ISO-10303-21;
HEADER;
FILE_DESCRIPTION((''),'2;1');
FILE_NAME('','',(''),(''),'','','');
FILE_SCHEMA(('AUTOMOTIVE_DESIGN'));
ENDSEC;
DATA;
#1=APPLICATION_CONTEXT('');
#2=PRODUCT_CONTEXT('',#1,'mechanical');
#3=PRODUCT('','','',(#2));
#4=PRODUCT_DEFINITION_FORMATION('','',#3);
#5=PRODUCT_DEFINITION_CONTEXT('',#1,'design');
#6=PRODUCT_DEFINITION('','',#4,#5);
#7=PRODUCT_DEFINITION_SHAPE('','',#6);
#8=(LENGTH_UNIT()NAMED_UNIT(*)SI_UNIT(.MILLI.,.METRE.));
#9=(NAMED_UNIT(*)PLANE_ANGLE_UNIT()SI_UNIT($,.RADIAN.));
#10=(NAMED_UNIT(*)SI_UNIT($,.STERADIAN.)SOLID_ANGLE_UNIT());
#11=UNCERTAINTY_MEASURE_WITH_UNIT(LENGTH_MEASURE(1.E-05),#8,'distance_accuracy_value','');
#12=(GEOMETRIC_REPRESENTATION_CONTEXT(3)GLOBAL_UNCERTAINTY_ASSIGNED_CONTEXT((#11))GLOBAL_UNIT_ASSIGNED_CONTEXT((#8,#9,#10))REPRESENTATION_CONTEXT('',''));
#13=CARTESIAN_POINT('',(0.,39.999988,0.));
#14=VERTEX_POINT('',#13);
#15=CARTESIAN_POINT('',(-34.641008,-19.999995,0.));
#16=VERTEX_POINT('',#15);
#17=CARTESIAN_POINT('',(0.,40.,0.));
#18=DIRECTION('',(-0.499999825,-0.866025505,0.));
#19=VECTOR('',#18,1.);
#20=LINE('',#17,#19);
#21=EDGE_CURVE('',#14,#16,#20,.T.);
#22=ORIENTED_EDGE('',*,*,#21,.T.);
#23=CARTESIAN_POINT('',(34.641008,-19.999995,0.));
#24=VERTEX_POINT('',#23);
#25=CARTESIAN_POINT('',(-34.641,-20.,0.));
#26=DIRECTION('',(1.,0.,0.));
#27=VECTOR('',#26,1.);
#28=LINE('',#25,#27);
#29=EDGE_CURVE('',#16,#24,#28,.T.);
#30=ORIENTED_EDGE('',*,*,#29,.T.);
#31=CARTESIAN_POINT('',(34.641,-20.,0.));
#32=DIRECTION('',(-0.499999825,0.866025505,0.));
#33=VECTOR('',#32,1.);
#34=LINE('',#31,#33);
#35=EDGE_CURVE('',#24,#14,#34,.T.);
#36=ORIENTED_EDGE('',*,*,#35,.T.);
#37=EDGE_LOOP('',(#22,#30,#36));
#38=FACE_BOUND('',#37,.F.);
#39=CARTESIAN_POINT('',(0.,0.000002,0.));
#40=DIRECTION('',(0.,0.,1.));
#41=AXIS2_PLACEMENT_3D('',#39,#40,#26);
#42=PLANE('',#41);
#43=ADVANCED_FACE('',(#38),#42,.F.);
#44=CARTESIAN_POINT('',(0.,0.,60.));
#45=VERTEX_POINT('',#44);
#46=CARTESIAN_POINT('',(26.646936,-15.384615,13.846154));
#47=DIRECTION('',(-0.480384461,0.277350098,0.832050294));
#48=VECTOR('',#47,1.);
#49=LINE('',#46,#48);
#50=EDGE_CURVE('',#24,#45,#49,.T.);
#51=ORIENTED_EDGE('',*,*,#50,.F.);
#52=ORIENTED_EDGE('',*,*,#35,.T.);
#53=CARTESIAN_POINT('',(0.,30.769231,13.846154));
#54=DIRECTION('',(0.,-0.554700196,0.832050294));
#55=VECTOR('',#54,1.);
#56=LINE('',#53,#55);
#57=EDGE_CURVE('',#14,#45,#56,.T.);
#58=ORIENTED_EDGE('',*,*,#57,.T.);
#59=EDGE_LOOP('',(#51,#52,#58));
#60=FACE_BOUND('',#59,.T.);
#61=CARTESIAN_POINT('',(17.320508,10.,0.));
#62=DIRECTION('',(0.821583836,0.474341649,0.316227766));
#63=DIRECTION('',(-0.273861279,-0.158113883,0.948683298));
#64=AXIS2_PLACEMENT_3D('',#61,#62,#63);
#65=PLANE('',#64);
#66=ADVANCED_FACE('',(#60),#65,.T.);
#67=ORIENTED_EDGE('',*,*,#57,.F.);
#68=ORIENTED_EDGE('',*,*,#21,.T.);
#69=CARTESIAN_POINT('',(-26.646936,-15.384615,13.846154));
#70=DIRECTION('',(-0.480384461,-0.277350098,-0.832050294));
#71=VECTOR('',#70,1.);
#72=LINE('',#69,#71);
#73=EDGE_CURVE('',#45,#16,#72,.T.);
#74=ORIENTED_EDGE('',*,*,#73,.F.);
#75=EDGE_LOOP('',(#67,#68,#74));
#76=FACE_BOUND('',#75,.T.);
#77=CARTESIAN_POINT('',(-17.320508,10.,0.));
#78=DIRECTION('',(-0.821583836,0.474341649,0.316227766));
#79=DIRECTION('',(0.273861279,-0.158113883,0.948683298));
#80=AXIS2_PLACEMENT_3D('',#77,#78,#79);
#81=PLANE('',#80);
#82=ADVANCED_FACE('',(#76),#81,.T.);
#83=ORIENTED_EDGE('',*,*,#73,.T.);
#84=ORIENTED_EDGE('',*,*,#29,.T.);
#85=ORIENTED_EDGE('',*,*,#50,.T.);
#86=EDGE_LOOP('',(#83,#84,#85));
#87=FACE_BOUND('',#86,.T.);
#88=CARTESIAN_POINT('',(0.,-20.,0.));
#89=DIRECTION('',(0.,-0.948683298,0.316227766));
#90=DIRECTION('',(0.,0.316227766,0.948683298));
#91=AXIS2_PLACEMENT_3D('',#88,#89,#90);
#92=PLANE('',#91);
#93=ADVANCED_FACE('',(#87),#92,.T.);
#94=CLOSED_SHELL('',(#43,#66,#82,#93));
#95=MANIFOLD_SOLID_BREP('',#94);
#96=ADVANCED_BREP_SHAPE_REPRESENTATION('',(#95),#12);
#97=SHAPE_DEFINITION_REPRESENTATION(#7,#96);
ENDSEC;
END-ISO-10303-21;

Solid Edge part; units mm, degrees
sketch "Sketch1" plane through (0, 0, 0) normal (0, 0, 1) x (1, 0, 0)
  line L0 (-34.641, -20) -> (34.641, -20)
  line L1 (34.641, -20) -> (0, 40)
  line L2 (0, 40) -> (-34.641, -20)
extrude "Protrusion1" add sketch "Sketch1" along normal up to vertex (60 mm away)
sketch "Sketch2" plane through (0, 0, 0) normal (1, 0, 0) x (0, 1, 0)
  line L0 (-20, 60) -> (-20, 0)
  line L1 (-20, 0) -> (0, 60)
  line L2 (0, 60) -> (-20, 60)
extrude "Cutout1" cut sketch "Sketch2" along normal mid plane 69.282
pattern_circular "Pattern1" count 3 over 360 about axis through (0, 0, 60) along (0, 0, 1) of "Protrusion1"
sketch "Sketch3" plane through (0, 0, 0) normal (1, 0, 0) x (0, 1, 0)
  line L0 (-20, 60) -> (-20, 0)
  line L1 (-20, 0) -> (0, 60)
  line L2 (0, 60) -> (-20, 60)
extrude "Cutout2" cut sketch "Sketch3" along normal mid plane 69.282
pattern_circular "Pattern2" count 3 over 360 about axis through (0, 0, 60) along (0, 0, 1) of "Cutout2"
